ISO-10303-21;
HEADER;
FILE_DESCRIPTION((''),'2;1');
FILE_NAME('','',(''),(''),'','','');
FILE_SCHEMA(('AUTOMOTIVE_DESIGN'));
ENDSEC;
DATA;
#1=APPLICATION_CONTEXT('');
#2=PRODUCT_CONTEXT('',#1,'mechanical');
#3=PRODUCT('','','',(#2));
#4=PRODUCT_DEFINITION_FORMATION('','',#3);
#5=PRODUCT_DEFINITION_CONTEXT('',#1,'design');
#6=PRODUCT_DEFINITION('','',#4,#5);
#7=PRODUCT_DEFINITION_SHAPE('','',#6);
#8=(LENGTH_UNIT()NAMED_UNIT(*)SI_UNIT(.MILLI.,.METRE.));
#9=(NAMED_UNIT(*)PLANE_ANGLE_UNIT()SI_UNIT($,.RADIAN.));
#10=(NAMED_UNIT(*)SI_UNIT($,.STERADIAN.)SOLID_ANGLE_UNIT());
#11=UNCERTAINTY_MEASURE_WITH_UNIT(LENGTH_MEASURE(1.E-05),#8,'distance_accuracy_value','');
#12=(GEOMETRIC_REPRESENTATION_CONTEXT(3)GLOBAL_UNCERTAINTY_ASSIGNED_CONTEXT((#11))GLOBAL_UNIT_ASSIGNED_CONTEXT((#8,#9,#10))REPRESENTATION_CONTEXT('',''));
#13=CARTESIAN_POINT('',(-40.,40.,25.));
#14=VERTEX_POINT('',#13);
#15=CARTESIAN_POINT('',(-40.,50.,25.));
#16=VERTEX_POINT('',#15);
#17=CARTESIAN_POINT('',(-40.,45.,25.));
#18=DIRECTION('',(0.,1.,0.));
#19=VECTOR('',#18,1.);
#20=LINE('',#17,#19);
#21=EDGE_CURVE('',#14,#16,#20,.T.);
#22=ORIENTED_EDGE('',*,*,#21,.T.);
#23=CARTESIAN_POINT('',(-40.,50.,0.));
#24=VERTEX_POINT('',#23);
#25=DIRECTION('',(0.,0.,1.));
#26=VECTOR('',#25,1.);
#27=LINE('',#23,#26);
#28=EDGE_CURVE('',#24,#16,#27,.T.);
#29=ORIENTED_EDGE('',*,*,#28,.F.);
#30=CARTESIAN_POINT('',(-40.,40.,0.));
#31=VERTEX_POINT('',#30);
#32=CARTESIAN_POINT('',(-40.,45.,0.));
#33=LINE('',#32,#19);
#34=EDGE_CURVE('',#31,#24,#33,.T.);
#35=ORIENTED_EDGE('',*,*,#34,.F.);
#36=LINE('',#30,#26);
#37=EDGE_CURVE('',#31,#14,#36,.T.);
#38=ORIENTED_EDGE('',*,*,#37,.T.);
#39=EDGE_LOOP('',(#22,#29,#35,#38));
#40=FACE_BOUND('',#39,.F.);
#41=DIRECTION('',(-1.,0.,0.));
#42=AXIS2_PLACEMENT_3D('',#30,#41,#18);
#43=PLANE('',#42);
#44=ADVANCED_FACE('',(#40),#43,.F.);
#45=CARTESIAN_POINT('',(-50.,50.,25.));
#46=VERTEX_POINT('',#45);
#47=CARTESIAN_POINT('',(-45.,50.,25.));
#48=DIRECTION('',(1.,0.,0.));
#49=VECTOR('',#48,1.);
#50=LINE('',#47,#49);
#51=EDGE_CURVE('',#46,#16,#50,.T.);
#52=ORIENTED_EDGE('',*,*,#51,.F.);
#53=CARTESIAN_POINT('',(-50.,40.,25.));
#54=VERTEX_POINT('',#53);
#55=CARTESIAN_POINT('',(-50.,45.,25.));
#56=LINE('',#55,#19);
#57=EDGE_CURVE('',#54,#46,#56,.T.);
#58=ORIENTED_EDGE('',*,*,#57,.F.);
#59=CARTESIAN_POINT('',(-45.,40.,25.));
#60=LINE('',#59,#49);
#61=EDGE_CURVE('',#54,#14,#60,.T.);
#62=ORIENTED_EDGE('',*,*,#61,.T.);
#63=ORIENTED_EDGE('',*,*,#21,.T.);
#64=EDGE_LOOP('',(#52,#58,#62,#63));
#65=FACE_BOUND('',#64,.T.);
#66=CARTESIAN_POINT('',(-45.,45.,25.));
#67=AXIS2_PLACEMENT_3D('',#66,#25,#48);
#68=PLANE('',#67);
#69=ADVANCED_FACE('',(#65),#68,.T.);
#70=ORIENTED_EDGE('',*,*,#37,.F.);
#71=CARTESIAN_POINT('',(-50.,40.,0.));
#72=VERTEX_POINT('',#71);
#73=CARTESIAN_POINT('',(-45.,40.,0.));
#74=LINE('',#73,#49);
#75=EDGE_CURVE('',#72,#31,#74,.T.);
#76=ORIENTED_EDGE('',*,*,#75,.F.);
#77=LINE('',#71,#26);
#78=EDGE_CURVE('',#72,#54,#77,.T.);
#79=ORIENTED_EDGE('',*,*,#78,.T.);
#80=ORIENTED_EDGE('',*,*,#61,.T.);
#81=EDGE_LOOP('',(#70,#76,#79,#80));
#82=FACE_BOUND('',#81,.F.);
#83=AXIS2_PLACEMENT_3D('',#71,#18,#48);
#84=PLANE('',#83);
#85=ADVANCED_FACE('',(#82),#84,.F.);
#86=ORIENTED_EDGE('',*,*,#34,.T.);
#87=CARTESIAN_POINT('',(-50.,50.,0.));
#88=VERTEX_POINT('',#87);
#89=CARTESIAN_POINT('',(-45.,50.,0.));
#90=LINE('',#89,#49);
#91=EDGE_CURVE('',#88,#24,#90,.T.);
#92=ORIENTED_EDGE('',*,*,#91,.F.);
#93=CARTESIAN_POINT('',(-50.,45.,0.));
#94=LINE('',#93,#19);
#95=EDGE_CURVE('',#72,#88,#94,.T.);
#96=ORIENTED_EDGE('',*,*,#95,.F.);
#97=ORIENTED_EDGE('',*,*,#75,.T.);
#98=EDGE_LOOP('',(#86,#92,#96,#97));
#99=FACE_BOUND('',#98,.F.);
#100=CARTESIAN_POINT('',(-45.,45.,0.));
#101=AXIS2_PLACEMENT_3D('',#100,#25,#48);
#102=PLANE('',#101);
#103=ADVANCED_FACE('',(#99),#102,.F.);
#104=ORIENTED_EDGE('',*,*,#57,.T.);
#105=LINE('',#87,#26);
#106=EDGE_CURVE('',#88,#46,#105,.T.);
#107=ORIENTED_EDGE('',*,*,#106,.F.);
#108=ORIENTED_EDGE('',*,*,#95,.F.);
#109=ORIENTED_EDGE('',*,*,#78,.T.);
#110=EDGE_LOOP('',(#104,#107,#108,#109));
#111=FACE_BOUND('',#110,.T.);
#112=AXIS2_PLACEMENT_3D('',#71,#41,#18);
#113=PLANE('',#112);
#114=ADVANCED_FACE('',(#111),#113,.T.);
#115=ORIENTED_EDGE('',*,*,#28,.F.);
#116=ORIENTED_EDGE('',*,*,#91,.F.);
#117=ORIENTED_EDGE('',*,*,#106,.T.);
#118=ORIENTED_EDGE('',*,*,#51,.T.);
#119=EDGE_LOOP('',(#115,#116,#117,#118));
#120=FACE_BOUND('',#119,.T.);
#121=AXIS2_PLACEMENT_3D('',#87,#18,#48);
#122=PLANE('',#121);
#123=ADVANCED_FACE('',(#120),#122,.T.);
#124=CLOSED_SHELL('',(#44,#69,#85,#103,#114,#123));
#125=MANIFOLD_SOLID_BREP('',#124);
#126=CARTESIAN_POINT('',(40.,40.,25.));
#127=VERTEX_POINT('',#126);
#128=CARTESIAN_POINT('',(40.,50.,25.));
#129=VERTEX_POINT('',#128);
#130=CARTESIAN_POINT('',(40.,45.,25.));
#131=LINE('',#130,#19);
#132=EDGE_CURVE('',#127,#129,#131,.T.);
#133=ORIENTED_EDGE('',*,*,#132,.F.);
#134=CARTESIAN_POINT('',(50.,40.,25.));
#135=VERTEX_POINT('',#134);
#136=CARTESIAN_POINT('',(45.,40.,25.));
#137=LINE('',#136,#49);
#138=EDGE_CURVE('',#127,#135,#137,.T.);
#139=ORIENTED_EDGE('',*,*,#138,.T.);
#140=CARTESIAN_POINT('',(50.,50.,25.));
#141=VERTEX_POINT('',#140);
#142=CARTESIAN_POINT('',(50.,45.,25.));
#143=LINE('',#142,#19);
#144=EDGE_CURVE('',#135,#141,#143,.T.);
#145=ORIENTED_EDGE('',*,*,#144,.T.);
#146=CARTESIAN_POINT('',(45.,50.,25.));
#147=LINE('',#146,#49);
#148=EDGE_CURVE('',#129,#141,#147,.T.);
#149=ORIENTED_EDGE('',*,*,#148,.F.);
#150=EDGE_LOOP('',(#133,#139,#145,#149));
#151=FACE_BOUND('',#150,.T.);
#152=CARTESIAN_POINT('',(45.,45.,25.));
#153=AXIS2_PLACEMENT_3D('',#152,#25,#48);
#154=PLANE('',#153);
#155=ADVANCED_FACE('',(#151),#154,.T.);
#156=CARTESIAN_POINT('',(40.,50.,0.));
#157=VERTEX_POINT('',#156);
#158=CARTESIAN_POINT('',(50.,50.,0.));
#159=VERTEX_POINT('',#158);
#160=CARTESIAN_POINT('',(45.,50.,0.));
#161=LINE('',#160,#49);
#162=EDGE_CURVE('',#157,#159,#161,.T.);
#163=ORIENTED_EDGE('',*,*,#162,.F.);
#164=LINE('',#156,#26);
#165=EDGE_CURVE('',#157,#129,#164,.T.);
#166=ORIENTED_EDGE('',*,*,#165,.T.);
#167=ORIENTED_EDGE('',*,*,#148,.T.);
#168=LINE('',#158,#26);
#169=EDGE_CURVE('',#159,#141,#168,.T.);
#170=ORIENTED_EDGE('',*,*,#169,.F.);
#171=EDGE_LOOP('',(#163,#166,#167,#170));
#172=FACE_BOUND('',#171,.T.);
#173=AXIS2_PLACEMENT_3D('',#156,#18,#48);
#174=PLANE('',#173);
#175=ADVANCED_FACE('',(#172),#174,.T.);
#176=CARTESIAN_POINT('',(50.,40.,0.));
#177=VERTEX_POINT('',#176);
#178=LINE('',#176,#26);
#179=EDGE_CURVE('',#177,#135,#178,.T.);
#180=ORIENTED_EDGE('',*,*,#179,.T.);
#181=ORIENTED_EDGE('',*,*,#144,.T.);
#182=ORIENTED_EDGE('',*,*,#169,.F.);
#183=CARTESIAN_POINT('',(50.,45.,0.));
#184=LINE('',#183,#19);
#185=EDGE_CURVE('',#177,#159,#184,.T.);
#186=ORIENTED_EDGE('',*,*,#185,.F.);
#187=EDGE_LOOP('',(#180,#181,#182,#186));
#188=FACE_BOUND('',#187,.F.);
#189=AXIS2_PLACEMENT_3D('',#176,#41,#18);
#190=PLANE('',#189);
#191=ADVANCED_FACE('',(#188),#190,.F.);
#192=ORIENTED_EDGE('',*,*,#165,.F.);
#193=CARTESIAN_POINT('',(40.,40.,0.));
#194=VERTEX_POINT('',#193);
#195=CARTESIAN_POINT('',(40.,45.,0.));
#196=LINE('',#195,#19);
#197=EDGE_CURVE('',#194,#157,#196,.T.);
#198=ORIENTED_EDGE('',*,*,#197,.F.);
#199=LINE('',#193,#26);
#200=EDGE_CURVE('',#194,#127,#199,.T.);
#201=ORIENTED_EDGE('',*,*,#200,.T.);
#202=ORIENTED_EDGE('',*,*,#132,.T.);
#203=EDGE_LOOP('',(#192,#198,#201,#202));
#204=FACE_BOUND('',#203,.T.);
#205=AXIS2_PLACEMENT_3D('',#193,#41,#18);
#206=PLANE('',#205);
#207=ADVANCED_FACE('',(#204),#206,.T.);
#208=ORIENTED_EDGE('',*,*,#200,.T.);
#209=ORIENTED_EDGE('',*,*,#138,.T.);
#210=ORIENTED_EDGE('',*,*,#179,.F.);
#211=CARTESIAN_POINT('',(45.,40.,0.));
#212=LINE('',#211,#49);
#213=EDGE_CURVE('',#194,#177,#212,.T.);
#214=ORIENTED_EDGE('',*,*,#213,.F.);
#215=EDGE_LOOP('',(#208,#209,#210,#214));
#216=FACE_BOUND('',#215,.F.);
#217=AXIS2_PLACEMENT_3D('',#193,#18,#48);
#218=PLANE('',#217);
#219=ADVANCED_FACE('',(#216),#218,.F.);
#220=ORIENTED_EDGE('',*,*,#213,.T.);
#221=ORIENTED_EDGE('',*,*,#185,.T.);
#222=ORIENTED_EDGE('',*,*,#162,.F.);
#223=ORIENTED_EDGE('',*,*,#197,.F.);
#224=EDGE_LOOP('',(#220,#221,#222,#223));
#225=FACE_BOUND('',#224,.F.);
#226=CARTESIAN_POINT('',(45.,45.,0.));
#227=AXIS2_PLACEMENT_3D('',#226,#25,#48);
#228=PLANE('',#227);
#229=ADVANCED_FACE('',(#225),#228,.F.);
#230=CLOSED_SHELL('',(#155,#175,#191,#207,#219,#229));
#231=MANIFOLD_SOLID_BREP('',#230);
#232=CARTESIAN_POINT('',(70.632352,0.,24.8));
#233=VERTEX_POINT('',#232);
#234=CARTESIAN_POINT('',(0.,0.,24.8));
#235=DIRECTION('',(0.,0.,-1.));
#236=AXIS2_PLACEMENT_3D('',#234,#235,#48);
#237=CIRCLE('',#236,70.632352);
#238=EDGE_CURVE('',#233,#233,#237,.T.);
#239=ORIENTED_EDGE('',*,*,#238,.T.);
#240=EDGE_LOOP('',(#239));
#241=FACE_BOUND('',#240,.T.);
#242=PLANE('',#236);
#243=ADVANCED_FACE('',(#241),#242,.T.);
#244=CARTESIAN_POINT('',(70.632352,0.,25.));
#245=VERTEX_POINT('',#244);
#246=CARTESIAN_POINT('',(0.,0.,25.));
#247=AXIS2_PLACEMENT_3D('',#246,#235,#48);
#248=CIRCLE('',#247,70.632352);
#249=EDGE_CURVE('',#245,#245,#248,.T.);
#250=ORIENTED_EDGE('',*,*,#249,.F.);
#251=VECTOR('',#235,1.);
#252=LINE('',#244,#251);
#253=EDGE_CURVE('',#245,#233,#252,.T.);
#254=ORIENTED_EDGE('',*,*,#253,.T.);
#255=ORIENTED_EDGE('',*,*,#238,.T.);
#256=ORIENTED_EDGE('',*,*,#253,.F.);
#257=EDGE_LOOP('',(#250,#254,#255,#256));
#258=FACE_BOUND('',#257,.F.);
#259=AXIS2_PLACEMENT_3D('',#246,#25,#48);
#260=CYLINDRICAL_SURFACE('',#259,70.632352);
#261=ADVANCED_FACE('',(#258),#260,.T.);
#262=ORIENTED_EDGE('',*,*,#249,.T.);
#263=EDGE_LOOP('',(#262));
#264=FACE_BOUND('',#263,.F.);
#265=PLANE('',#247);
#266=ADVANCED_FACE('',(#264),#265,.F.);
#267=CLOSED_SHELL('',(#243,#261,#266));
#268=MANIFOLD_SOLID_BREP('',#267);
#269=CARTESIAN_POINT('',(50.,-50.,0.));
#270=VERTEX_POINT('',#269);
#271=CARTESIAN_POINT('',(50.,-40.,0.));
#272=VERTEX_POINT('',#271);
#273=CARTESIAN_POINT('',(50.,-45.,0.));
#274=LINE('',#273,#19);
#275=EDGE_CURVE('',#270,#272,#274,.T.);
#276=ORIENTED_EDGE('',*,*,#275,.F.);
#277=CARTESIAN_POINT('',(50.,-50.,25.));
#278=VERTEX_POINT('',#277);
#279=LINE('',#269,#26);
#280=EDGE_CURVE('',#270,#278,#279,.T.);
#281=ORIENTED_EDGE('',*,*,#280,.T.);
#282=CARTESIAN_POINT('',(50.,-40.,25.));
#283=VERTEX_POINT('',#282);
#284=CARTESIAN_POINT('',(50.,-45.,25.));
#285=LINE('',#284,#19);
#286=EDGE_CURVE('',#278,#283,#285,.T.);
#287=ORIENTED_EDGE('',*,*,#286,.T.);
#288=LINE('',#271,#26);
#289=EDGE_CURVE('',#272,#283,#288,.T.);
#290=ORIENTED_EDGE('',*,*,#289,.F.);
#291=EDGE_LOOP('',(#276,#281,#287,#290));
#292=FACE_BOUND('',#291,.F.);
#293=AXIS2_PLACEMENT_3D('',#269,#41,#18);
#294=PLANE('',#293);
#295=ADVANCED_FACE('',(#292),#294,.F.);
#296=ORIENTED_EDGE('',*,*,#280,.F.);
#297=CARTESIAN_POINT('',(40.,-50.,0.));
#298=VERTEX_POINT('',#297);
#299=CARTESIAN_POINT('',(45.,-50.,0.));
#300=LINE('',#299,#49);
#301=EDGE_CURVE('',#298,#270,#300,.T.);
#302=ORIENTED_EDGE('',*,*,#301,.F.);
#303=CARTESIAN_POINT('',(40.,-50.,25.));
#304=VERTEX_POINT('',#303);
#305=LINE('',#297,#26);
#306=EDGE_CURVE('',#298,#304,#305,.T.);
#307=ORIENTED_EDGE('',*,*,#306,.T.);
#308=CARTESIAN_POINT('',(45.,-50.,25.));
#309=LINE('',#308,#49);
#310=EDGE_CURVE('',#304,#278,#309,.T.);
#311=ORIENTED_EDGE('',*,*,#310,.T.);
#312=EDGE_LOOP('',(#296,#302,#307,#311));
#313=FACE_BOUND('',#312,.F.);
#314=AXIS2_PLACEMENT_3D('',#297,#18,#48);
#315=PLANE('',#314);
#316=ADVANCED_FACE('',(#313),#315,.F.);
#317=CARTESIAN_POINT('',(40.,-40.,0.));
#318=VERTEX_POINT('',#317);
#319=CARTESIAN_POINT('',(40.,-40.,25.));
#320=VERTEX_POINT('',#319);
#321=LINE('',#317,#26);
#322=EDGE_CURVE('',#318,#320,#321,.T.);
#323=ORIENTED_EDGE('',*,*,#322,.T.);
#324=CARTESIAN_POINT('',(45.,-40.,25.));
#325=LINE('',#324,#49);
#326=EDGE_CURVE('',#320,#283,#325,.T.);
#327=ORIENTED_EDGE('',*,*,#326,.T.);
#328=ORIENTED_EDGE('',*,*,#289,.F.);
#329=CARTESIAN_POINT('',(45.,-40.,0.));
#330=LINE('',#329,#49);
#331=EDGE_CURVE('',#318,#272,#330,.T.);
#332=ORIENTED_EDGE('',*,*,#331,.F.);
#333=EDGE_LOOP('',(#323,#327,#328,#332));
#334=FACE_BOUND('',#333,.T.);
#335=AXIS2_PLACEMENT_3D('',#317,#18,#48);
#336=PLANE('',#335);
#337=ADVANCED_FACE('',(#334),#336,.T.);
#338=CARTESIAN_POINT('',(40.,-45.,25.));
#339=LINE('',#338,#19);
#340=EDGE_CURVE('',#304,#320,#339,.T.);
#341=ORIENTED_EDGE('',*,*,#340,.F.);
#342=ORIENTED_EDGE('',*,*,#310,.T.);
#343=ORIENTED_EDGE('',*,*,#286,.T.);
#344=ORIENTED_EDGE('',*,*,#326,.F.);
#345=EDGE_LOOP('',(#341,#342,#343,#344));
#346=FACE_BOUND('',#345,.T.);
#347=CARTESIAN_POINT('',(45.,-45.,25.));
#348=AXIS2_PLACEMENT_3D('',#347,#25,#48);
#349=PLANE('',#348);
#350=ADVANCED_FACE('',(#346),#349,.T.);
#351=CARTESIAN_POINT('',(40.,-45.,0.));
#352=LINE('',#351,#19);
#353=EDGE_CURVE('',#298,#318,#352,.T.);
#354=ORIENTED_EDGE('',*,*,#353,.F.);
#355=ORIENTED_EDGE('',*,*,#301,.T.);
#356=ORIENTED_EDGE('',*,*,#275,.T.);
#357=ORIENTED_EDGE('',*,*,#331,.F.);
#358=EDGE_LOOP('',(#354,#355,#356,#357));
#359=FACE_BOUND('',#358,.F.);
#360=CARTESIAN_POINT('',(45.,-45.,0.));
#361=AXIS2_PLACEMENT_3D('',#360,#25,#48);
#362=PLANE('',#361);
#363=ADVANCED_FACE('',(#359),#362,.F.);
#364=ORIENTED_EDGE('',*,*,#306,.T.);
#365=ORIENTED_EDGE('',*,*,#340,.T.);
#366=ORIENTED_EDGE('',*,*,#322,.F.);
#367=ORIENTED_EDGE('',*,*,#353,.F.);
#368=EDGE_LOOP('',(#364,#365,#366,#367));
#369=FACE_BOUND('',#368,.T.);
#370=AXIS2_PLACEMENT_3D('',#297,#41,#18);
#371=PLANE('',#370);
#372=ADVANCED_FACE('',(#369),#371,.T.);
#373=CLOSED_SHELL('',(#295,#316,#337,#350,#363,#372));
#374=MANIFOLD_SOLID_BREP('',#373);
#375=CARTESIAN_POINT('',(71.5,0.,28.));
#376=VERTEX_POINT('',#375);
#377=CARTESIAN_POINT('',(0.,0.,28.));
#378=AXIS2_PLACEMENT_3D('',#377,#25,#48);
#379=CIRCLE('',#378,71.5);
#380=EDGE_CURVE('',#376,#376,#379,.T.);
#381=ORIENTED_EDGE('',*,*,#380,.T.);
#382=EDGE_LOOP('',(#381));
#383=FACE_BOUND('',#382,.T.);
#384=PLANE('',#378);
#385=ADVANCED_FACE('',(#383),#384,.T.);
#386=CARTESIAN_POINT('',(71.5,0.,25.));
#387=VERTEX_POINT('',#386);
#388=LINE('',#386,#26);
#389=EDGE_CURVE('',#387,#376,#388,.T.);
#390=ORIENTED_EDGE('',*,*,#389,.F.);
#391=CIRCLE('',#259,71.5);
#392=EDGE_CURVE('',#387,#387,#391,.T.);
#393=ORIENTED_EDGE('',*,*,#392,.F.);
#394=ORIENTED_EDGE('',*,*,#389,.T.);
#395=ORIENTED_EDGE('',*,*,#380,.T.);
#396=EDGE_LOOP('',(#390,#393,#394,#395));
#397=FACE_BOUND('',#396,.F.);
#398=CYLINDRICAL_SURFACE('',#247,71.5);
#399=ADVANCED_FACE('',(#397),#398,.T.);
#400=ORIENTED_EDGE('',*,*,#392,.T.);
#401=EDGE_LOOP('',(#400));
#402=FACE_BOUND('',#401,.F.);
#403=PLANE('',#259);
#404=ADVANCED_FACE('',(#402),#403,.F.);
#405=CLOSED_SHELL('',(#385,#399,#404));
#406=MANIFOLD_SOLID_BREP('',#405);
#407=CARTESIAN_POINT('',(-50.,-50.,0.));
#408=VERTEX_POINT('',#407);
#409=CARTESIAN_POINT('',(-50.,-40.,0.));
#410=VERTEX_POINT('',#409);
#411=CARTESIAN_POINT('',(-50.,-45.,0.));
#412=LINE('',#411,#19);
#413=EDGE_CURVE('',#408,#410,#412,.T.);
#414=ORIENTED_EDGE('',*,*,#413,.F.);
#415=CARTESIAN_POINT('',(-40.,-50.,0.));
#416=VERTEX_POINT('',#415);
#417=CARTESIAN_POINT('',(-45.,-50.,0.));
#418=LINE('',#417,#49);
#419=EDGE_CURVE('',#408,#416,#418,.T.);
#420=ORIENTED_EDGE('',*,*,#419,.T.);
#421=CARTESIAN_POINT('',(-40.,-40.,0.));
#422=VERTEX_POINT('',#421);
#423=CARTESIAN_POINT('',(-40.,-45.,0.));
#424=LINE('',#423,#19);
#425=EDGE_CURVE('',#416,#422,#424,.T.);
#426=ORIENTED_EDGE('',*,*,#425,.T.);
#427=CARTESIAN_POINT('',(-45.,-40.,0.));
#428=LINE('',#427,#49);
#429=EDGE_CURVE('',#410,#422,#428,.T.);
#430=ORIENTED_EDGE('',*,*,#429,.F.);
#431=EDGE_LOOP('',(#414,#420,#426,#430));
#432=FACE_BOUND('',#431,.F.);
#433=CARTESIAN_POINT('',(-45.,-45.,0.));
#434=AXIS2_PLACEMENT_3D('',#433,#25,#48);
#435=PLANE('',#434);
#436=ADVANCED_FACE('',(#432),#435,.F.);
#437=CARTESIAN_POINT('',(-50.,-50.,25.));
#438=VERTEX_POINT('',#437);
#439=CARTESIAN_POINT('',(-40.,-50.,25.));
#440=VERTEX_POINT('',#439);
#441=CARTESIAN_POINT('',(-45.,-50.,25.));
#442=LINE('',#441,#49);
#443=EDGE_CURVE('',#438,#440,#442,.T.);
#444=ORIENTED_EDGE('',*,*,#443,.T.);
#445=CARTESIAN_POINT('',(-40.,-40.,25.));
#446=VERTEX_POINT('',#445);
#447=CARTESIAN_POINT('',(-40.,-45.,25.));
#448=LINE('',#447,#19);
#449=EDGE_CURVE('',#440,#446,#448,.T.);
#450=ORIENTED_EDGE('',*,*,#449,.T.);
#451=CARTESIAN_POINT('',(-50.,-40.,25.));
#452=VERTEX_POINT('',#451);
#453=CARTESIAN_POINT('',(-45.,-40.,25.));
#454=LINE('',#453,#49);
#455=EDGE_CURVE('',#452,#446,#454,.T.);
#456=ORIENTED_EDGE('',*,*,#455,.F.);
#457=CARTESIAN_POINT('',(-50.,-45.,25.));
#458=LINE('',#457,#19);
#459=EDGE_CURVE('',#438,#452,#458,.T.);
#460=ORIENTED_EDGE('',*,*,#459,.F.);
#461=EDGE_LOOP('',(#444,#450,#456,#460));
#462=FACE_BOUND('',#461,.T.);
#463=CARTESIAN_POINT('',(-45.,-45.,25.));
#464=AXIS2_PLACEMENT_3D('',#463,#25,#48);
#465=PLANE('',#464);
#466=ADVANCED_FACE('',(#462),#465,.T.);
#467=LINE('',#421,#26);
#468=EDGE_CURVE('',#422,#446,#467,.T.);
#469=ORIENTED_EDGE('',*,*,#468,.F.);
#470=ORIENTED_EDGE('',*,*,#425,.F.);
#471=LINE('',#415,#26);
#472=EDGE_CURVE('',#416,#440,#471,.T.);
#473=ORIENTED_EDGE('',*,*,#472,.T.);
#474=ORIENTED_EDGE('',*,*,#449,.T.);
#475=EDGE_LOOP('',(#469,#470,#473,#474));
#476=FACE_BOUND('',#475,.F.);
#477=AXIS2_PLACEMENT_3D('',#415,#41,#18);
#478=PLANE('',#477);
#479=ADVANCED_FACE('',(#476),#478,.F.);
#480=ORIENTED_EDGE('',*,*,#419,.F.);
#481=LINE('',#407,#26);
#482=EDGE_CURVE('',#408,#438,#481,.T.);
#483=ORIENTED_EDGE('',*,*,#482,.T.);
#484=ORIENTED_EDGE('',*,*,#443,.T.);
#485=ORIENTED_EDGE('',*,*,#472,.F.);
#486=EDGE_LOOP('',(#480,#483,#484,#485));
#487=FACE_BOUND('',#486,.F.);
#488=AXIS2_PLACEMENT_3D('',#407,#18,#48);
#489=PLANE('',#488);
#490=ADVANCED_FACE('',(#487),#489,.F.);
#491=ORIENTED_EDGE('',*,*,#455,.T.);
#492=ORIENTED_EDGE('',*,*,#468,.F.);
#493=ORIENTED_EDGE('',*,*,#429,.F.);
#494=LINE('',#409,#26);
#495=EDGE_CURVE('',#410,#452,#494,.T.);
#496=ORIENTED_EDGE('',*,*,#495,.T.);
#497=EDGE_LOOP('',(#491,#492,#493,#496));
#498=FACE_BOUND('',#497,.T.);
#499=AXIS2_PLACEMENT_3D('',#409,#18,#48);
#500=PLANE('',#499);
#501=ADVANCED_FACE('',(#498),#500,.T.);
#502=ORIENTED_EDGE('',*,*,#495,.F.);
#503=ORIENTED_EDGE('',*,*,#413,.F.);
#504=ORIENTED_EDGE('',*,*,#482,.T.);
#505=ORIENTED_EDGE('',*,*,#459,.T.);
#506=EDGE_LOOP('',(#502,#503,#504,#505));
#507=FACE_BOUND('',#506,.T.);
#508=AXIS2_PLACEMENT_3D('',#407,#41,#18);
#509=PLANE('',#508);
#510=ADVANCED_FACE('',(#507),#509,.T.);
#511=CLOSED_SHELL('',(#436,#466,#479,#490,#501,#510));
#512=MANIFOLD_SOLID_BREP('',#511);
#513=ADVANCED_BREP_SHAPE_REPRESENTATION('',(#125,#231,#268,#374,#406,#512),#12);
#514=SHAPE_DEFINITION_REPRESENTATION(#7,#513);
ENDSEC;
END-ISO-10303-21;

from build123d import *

# Parameters (mm, degrees)
F0_W     = 10
F0_H     = 10
F1_DEPTH = 25
F2_R     = 71.5
F3_DEPTH = 3
F6_R     = 70.6323523745
F7_DEPTH = 0.2


# Not quite as in the source:
# - the program builds the solid bodies; features that only make, move or delete a surface that nothing else refers to are left out


with BuildPart() as f1:
    # F0 (on Top) → F1 (new body)
    with BuildSketch(Plane.XY):
        with Locations((45, -45)):
            Rectangle(F0_W, F0_H)
    extrude(amount=F1_DEPTH)


with BuildPart() as f1b:
    # F0 (on Top) → F1, piece 2 (new body)
    with BuildSketch(Plane.XY):
        with Locations((45, 45)):
            Rectangle(F0_W, F0_H)
    extrude(amount=F1_DEPTH)


with BuildPart() as f1c:
    # F0 (on Top) → F1, piece 3 (new body)
    with BuildSketch(Plane.XY):
        with Locations((-45, -45)):
            Rectangle(F0_W, F0_H)
    extrude(amount=F1_DEPTH)


with BuildPart() as f1d:
    # F0 (on Top) → F1, piece 4 (new body)
    with BuildSketch(Plane.XY):
        with Locations((-45, 45)):
            Rectangle(F0_W, F0_H)
    extrude(amount=F1_DEPTH)


with BuildPart() as f3:
    # F2 (on face) → F3 (new body)
    with BuildSketch(Plane.XY.offset(25)):
        Circle(F2_R)
    extrude(amount=F3_DEPTH)


with BuildPart() as f7:
    # F6 (on face) → F7 (new body)
    with BuildSketch(Plane(origin=(0, 0, 25), x_dir=(1, 0, 0), z_dir=(0, 0, -1))):
        Circle(F6_R)
    extrude(amount=F7_DEPTH)


solid = Compound([f1.part, f1b.part, f1c.part, f1d.part, f3.part, f7.part])
